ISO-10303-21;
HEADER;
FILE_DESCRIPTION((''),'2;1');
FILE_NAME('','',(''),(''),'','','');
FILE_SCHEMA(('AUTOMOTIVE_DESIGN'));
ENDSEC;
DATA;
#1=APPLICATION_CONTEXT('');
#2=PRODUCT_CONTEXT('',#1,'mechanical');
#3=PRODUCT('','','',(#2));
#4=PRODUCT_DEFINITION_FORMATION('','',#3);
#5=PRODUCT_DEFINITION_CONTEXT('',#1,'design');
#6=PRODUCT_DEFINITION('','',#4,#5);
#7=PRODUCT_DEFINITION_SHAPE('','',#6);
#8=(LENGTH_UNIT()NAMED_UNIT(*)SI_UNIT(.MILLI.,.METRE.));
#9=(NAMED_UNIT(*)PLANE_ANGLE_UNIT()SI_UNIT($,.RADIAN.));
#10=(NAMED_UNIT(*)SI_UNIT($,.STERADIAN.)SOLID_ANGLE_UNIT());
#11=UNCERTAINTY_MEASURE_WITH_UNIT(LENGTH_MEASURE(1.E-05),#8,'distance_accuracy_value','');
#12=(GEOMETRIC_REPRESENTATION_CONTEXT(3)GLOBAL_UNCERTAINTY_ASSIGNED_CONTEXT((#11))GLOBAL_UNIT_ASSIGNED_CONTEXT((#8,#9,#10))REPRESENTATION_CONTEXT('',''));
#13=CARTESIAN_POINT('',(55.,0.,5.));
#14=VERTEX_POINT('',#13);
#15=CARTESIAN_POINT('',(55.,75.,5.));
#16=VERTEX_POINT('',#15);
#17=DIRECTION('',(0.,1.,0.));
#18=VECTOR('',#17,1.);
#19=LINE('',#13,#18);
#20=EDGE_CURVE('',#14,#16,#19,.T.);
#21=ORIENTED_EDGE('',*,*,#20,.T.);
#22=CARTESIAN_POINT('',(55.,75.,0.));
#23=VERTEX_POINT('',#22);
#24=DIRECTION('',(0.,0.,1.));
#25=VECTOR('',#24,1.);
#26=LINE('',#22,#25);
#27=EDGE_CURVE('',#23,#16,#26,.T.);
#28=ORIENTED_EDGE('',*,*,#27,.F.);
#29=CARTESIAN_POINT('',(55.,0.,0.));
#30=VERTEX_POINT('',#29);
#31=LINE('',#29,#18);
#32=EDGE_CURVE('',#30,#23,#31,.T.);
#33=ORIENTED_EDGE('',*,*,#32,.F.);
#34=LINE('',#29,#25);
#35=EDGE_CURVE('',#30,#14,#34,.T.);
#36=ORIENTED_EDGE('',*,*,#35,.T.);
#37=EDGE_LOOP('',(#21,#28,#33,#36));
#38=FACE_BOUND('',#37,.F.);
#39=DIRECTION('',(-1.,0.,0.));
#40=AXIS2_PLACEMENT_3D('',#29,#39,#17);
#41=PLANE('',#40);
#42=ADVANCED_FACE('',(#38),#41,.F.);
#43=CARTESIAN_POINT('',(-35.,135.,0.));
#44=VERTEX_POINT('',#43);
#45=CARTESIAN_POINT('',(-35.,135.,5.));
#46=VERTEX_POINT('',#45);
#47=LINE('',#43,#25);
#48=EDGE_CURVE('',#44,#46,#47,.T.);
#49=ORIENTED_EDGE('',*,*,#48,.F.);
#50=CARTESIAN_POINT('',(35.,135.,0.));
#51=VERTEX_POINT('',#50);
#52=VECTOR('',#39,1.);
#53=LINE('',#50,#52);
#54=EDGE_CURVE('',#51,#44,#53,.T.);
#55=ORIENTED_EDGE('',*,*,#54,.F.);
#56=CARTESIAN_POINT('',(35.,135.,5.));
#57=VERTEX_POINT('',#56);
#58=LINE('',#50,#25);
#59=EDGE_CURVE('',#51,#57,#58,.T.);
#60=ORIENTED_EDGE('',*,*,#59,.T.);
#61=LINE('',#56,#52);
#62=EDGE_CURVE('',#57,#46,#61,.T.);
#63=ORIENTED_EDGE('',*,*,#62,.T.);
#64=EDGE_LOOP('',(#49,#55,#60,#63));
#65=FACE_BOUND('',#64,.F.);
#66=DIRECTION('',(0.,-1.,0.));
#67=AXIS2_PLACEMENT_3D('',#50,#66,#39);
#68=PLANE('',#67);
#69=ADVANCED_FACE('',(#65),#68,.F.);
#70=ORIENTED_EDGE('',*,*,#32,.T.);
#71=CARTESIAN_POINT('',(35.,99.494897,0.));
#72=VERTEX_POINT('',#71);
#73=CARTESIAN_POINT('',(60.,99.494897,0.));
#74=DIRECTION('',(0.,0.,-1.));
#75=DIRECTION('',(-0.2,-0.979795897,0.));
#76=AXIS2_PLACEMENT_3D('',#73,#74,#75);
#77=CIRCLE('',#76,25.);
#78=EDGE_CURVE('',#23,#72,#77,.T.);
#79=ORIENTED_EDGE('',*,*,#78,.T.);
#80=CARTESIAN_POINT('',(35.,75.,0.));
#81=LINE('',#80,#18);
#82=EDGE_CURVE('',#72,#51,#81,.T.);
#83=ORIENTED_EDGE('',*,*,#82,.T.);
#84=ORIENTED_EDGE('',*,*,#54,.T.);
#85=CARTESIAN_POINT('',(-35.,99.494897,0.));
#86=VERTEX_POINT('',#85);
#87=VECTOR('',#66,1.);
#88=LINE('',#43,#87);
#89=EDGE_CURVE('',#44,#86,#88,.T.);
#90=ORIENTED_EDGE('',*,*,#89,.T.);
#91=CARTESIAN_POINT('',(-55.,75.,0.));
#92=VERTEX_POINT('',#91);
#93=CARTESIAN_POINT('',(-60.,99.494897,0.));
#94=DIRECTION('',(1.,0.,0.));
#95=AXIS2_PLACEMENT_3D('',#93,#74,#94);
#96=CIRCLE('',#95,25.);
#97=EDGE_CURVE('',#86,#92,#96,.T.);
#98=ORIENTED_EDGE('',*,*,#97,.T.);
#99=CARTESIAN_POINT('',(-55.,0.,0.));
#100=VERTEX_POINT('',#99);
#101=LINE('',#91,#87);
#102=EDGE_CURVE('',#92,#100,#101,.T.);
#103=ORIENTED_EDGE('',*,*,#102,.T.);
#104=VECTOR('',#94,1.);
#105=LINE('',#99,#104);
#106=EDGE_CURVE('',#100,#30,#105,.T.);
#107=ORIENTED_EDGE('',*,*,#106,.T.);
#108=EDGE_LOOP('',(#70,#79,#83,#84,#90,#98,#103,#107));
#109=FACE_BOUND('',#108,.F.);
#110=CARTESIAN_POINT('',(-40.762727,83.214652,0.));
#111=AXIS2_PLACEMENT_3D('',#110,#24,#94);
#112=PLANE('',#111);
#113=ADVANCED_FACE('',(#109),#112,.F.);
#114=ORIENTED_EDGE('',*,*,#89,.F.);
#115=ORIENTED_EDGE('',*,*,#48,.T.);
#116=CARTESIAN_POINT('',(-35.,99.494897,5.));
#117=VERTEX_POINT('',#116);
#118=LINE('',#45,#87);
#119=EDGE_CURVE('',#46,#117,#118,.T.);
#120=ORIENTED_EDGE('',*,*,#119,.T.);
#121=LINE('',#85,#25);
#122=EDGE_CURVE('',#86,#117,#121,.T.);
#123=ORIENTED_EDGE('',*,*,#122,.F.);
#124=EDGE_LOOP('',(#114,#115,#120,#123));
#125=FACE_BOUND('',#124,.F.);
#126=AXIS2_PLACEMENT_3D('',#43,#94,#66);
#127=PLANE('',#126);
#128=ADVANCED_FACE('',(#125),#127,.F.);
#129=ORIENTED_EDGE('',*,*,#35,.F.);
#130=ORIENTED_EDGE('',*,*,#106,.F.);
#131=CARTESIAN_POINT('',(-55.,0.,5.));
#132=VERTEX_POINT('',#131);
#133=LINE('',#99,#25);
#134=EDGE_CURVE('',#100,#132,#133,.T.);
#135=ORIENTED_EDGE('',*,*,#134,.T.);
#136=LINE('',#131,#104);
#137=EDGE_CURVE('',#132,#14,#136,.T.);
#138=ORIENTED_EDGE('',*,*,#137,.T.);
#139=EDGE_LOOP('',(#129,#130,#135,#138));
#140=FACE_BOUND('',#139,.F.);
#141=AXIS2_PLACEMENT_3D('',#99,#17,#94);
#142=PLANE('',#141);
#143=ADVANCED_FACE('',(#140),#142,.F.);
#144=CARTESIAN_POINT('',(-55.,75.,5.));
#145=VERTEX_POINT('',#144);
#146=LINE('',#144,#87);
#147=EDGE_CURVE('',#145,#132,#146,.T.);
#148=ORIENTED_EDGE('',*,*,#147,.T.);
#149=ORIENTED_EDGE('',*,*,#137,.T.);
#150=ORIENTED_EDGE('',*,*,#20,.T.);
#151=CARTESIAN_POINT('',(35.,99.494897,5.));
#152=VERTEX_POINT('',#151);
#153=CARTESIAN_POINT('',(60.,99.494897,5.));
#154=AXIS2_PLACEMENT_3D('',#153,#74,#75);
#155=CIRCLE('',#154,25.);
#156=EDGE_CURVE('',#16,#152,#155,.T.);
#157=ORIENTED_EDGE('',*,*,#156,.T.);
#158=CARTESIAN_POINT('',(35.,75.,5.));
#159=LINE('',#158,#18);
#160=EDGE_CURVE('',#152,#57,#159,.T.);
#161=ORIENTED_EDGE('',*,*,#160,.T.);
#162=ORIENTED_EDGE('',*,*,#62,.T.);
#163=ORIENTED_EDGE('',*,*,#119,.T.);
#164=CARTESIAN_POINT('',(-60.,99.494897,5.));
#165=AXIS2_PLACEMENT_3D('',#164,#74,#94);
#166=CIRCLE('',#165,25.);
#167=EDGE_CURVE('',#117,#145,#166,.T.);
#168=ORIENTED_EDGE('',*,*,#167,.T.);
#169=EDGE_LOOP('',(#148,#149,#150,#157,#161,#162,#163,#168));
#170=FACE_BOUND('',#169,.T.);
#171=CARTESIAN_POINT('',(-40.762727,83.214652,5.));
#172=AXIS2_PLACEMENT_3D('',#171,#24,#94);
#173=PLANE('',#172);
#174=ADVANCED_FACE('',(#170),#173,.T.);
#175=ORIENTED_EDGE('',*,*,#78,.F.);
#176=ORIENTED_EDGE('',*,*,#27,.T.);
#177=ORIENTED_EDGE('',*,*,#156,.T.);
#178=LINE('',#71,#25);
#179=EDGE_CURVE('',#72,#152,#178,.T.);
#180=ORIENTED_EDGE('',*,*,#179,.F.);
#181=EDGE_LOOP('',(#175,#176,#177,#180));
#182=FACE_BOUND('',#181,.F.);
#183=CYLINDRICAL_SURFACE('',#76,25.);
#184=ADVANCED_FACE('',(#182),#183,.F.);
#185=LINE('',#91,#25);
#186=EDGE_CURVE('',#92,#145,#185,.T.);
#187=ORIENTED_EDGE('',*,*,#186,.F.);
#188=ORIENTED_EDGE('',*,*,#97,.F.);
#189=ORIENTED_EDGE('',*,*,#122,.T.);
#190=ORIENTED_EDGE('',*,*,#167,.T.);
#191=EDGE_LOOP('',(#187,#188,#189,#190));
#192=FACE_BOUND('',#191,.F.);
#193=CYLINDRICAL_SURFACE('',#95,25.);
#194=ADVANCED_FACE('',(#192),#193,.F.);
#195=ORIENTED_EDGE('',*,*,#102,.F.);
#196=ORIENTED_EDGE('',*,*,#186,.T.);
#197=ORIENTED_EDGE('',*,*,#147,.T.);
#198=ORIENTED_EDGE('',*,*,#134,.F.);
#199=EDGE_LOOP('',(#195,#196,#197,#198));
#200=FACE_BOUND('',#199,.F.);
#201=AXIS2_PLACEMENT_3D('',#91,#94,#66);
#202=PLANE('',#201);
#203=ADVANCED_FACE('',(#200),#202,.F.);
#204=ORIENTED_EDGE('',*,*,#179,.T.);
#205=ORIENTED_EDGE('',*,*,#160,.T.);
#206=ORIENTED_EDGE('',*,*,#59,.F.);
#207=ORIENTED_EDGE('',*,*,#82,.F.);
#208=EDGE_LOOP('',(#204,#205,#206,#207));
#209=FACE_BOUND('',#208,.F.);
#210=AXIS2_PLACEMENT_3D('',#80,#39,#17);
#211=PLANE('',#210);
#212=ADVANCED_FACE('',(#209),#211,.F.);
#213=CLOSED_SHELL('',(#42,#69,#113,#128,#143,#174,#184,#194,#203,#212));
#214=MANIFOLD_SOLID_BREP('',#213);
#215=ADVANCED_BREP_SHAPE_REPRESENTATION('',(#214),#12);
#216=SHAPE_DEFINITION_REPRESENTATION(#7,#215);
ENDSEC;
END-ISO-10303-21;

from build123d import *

# Parameters (mm, degrees)
F1_DEPTH    = 5
F2_T1_DEPTH = 5


# Not quite as in the source:
# - a fillet or chamfer that OpenCascade refuses, or shapes differently, is made with other operations: its cross-section is extruded or revolved along the edge and cut away or added


with BuildPart() as f1:
    # F0 (on Top) → F1 (new body)
    with BuildSketch(Plane.XY):
        Polygon((35, 135), (-35, 135), (-35, 75), (-55, 75), (-55, 0), (55, 0), (55, 75), (35, 75), align=None)
    extrude(amount=F1_DEPTH)

    # F2: fillet of radius 25 on 2 edges, made by hand

    # F2_s2 → F2_t1 (join)
    with BuildSketch(Plane.XY):
        with BuildLine():
            ThreePointArc((-35, 99.4948974278), (-40.635083269, 83.683509127), (-55, 75))
            Line((-55, 75), (-35, 75))
            Line((-35, 75), (-35, 99.4948974278))
        make_face()
        with BuildLine():
            ThreePointArc((55, 75), (40.635083269, 83.683509127), (35, 99.4948974278))
            Line((35, 99.4948974278), (35, 75))
            Line((35, 75), (55, 75))
        make_face()
    extrude(amount=F2_T1_DEPTH)


solid = f1.part
